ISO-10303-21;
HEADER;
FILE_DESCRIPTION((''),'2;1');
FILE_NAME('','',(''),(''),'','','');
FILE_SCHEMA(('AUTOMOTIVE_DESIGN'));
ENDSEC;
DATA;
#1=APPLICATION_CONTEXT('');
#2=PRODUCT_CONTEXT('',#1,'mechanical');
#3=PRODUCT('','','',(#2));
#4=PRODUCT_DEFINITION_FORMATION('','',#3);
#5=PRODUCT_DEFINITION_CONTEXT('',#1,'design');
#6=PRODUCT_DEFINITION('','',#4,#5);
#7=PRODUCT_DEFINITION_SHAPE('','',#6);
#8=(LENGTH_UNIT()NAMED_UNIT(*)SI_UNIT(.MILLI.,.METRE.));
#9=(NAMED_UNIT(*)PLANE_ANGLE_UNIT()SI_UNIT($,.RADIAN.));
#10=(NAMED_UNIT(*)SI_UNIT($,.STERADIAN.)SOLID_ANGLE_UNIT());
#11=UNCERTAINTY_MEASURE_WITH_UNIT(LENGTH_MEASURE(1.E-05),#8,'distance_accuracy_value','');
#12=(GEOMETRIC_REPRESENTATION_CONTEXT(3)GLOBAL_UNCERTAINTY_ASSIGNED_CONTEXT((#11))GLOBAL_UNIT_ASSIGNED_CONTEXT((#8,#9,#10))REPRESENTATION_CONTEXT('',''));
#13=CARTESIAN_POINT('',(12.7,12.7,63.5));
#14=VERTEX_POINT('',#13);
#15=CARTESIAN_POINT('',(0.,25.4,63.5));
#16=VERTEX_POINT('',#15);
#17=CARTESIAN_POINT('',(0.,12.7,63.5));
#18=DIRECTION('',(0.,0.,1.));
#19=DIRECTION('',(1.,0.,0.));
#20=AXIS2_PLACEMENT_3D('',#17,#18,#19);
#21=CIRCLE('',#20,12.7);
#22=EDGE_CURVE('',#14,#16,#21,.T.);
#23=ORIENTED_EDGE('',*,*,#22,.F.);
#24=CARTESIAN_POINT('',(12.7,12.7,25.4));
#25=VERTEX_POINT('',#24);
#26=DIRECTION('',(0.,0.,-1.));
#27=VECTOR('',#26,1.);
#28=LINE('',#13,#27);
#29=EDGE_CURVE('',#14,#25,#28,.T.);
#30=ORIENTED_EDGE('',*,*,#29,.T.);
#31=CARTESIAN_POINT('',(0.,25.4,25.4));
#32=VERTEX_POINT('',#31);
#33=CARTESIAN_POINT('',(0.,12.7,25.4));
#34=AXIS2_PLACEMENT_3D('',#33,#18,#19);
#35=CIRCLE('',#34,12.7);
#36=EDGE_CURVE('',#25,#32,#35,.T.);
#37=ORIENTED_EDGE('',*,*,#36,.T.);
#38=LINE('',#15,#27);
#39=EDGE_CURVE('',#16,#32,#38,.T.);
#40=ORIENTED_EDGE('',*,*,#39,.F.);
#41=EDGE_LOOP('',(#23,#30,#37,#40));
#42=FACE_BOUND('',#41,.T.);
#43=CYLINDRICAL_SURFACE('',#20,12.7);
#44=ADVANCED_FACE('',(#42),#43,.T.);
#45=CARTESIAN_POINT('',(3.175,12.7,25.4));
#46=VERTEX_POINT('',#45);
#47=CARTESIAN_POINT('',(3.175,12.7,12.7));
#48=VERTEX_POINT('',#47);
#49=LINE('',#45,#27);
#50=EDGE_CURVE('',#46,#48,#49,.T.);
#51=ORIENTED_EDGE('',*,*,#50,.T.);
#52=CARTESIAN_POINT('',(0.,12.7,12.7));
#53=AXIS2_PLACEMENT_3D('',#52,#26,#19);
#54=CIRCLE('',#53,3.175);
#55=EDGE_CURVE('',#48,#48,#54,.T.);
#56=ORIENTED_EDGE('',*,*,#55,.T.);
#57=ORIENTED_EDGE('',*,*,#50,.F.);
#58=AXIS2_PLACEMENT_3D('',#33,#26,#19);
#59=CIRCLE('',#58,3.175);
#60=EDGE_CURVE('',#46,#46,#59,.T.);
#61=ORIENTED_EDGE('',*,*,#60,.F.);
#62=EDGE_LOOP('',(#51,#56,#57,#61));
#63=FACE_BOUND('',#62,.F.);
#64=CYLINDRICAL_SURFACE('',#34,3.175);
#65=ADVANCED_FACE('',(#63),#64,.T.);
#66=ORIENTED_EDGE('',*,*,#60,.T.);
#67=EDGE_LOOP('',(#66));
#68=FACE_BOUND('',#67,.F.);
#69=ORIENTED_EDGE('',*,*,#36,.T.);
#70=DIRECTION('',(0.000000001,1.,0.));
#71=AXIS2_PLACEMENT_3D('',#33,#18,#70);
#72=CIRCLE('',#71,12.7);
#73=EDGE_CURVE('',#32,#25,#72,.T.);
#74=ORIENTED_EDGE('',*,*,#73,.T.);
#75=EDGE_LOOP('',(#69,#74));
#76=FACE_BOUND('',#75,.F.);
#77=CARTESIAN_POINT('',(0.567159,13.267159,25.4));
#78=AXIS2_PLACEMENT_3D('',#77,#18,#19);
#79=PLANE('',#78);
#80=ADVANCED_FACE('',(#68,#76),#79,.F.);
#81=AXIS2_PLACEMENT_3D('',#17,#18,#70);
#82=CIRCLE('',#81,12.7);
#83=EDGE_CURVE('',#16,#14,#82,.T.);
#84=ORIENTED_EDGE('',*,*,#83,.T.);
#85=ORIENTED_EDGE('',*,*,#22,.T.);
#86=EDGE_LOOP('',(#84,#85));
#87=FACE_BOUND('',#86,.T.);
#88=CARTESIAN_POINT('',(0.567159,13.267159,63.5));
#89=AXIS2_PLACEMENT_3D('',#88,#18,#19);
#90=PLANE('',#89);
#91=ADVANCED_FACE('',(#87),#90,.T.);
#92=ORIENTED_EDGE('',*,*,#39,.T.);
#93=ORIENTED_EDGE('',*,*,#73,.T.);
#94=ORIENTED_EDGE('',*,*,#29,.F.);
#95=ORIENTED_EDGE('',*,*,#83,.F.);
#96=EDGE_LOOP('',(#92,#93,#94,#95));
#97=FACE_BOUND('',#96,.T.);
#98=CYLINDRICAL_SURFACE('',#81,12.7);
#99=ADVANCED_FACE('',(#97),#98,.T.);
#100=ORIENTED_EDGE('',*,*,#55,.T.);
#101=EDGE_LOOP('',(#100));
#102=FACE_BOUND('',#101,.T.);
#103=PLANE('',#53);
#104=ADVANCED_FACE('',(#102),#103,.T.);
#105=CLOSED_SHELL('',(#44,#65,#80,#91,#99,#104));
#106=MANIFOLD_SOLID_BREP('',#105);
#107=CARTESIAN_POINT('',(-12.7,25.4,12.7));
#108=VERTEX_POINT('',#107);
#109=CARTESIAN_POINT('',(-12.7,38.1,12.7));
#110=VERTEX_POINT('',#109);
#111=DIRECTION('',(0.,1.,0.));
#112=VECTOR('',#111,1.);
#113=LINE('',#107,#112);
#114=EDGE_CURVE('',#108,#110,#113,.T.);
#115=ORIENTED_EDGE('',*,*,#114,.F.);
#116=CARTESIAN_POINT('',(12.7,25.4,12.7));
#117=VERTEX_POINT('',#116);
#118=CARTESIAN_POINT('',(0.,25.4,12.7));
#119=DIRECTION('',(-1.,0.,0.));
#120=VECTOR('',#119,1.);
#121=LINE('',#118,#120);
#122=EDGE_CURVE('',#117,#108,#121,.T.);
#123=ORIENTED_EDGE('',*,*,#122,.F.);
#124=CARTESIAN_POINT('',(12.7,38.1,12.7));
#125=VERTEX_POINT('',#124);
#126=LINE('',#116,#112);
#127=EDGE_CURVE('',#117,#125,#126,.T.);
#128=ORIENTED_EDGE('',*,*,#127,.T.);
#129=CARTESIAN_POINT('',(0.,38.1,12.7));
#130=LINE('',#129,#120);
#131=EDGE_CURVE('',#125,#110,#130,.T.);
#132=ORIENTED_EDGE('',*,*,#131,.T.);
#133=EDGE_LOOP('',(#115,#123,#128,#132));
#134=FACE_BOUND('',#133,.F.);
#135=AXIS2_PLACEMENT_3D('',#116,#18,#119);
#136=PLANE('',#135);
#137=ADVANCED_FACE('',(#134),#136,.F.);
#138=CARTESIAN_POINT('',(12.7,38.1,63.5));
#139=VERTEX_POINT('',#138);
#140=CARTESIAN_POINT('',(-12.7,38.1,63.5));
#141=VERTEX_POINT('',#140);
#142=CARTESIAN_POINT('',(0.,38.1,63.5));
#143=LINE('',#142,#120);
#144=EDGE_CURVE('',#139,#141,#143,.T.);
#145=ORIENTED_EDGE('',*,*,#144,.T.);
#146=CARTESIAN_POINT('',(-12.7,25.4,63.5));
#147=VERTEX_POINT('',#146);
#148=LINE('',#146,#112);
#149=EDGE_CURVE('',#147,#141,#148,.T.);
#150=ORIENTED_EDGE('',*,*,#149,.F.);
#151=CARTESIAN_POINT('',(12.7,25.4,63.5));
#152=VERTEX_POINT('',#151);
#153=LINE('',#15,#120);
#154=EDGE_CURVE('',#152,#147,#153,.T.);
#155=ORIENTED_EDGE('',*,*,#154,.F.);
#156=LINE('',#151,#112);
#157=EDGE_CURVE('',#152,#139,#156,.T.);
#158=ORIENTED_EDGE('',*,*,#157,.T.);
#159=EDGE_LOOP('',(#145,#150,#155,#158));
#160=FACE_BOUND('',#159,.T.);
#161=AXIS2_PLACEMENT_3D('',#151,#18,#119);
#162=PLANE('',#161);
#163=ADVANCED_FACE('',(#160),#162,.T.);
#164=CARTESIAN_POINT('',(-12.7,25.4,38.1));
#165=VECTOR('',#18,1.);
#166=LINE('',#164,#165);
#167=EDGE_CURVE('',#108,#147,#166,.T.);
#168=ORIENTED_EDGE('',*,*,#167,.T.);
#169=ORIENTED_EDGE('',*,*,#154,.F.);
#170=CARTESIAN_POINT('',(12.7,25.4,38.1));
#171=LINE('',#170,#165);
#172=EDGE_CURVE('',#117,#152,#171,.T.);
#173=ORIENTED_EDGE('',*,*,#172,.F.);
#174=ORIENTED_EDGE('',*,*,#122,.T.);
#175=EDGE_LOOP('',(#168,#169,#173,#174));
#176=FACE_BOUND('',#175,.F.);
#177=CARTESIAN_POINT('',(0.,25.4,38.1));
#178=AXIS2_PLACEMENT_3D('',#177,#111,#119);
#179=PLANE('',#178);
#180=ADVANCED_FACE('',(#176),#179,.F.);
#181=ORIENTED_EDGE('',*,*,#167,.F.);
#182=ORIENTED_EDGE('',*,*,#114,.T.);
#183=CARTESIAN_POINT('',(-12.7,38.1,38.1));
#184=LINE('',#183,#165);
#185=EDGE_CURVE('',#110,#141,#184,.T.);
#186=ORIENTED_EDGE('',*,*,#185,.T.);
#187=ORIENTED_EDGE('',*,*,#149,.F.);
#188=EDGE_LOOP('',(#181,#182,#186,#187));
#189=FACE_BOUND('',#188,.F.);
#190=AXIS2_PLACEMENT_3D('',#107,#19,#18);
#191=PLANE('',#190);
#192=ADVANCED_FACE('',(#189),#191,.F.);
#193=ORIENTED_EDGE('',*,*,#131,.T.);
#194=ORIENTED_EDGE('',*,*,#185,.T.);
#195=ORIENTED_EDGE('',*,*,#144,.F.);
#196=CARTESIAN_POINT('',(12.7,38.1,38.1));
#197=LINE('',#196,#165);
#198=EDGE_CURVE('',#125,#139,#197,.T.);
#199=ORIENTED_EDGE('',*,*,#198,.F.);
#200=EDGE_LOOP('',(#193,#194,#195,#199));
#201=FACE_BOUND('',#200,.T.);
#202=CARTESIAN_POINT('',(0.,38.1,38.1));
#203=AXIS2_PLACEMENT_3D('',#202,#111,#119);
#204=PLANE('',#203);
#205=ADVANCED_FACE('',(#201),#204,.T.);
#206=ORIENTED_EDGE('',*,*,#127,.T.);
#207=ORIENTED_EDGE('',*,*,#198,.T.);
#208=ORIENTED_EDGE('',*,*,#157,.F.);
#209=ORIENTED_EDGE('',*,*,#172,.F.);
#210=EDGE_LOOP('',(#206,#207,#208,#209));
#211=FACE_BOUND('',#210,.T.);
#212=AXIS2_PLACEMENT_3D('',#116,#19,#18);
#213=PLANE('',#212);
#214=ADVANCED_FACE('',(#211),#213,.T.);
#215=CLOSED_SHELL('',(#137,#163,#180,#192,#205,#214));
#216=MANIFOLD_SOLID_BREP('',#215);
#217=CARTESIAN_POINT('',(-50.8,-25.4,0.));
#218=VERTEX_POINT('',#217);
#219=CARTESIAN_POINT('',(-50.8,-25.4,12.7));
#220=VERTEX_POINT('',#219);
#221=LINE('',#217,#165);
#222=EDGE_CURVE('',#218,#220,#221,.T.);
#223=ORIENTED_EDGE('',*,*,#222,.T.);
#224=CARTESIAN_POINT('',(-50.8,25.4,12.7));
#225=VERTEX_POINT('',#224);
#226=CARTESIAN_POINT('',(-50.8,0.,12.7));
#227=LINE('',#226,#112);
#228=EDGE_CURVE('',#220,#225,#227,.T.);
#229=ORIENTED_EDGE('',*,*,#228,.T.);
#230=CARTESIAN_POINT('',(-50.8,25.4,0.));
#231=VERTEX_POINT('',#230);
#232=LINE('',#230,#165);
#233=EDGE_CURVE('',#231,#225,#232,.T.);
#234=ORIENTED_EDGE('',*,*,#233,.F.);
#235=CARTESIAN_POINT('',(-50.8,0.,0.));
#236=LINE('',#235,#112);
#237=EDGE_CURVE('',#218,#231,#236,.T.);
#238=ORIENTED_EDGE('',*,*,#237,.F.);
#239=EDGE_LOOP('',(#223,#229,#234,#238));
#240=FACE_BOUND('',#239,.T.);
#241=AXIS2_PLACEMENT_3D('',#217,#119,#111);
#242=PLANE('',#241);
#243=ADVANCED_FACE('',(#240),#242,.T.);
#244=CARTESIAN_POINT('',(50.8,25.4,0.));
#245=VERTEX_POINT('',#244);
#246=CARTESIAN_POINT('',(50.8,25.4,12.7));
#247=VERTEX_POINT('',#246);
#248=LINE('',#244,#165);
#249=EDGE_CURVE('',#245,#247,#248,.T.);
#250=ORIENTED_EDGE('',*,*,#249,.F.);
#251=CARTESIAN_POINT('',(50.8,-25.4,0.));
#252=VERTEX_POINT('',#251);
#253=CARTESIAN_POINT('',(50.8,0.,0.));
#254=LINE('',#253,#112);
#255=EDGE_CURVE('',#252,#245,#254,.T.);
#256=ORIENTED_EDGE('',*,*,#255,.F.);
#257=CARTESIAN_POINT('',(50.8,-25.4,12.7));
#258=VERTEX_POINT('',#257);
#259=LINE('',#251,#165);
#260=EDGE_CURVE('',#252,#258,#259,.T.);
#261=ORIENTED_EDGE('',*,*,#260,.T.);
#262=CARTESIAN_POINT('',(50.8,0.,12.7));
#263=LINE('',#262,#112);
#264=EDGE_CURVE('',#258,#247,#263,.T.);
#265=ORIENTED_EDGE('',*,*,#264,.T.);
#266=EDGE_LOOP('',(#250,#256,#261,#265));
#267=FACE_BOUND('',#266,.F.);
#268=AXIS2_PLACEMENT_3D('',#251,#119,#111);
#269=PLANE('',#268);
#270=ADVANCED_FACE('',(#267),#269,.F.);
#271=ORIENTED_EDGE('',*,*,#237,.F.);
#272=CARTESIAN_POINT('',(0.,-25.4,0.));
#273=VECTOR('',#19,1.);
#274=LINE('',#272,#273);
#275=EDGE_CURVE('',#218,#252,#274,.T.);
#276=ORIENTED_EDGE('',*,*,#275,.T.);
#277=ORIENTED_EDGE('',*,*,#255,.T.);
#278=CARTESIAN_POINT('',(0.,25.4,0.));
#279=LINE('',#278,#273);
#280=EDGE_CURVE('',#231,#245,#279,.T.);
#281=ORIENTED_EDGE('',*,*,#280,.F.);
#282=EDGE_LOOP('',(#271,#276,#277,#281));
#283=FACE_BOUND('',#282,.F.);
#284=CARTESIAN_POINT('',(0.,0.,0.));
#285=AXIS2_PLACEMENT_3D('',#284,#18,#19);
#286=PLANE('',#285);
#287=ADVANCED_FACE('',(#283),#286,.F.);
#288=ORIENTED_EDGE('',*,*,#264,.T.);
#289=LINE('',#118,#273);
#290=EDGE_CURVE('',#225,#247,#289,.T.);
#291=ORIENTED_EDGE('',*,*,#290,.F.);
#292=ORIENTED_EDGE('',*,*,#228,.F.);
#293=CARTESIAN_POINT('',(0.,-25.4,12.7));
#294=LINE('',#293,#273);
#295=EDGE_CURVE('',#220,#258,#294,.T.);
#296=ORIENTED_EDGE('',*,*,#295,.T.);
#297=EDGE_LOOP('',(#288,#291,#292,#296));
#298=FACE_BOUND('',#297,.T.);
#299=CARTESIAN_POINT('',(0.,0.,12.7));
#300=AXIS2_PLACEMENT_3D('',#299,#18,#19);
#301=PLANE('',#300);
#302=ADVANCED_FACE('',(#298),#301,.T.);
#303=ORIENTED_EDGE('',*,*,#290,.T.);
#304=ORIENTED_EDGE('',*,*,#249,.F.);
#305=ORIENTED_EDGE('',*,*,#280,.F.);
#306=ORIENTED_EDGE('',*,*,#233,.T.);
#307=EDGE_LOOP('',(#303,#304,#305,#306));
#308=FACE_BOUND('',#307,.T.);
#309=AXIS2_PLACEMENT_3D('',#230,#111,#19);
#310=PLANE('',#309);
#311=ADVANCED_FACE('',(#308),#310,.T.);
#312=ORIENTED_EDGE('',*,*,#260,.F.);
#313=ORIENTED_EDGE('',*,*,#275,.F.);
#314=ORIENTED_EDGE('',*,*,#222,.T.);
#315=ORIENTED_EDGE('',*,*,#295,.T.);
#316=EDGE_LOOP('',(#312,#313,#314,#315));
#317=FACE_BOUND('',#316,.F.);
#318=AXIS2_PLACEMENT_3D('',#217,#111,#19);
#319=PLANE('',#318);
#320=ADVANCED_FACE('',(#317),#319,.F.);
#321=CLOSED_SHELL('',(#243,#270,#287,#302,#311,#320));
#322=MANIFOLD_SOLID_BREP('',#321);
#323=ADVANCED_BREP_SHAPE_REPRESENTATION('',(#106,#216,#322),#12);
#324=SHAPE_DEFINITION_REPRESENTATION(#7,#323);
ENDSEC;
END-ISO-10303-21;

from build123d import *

# Parameters (mm, degrees)
F0_W     = 101.6
F0_H     = 50.8
F1_DEPTH = 12.7
F2_W     = 25.4
F2_H     = 50.8
F3_DEPTH = 12.7
F5_DEPTH = 38.1
F6_R     = 3.175
F7_DEPTH = 12.7


with BuildPart() as f1:
    # F0 (on Top) → F1 (new body)
    with BuildSketch(Plane.XY):
        Rectangle(F0_W, F0_H)
    extrude(amount=F1_DEPTH)


with BuildPart() as f3:
    # F2 (on face) → F3 (new body)
    with BuildSketch(Plane(origin=(0, 25.4, 0), x_dir=(-1, 0, 0), z_dir=(0, 1, 0))):
        with Locations((0, 38.1)):
            Rectangle(F2_W, F2_H)
    extrude(amount=F3_DEPTH)


with BuildPart() as f5:
    # F4 (on face) → F5 (new body)
    with BuildSketch(Plane.XY.offset(63.5)):
        with BuildLine():
            ThreePointArc((1.16e-08, 25.4), (-8.9802561252, 3.719743883), (12.7, 12.7))
            ThreePointArc((12.7, 12.7), (8.9802561252, 21.680256117), (1.16e-08, 25.4))
        make_face()
    extrude(amount=-F5_DEPTH)

    # F6 (on face) → F7 (join)
    with BuildSketch(Plane(origin=(0, 0, 25.4), x_dir=(1, 0, 0), z_dir=(0, 0, -1))):
        with Locations((0, -12.7)):
            Circle(F6_R)
    extrude(amount=F7_DEPTH)


solid = Compound([f1.part, f3.part, f5.part])
